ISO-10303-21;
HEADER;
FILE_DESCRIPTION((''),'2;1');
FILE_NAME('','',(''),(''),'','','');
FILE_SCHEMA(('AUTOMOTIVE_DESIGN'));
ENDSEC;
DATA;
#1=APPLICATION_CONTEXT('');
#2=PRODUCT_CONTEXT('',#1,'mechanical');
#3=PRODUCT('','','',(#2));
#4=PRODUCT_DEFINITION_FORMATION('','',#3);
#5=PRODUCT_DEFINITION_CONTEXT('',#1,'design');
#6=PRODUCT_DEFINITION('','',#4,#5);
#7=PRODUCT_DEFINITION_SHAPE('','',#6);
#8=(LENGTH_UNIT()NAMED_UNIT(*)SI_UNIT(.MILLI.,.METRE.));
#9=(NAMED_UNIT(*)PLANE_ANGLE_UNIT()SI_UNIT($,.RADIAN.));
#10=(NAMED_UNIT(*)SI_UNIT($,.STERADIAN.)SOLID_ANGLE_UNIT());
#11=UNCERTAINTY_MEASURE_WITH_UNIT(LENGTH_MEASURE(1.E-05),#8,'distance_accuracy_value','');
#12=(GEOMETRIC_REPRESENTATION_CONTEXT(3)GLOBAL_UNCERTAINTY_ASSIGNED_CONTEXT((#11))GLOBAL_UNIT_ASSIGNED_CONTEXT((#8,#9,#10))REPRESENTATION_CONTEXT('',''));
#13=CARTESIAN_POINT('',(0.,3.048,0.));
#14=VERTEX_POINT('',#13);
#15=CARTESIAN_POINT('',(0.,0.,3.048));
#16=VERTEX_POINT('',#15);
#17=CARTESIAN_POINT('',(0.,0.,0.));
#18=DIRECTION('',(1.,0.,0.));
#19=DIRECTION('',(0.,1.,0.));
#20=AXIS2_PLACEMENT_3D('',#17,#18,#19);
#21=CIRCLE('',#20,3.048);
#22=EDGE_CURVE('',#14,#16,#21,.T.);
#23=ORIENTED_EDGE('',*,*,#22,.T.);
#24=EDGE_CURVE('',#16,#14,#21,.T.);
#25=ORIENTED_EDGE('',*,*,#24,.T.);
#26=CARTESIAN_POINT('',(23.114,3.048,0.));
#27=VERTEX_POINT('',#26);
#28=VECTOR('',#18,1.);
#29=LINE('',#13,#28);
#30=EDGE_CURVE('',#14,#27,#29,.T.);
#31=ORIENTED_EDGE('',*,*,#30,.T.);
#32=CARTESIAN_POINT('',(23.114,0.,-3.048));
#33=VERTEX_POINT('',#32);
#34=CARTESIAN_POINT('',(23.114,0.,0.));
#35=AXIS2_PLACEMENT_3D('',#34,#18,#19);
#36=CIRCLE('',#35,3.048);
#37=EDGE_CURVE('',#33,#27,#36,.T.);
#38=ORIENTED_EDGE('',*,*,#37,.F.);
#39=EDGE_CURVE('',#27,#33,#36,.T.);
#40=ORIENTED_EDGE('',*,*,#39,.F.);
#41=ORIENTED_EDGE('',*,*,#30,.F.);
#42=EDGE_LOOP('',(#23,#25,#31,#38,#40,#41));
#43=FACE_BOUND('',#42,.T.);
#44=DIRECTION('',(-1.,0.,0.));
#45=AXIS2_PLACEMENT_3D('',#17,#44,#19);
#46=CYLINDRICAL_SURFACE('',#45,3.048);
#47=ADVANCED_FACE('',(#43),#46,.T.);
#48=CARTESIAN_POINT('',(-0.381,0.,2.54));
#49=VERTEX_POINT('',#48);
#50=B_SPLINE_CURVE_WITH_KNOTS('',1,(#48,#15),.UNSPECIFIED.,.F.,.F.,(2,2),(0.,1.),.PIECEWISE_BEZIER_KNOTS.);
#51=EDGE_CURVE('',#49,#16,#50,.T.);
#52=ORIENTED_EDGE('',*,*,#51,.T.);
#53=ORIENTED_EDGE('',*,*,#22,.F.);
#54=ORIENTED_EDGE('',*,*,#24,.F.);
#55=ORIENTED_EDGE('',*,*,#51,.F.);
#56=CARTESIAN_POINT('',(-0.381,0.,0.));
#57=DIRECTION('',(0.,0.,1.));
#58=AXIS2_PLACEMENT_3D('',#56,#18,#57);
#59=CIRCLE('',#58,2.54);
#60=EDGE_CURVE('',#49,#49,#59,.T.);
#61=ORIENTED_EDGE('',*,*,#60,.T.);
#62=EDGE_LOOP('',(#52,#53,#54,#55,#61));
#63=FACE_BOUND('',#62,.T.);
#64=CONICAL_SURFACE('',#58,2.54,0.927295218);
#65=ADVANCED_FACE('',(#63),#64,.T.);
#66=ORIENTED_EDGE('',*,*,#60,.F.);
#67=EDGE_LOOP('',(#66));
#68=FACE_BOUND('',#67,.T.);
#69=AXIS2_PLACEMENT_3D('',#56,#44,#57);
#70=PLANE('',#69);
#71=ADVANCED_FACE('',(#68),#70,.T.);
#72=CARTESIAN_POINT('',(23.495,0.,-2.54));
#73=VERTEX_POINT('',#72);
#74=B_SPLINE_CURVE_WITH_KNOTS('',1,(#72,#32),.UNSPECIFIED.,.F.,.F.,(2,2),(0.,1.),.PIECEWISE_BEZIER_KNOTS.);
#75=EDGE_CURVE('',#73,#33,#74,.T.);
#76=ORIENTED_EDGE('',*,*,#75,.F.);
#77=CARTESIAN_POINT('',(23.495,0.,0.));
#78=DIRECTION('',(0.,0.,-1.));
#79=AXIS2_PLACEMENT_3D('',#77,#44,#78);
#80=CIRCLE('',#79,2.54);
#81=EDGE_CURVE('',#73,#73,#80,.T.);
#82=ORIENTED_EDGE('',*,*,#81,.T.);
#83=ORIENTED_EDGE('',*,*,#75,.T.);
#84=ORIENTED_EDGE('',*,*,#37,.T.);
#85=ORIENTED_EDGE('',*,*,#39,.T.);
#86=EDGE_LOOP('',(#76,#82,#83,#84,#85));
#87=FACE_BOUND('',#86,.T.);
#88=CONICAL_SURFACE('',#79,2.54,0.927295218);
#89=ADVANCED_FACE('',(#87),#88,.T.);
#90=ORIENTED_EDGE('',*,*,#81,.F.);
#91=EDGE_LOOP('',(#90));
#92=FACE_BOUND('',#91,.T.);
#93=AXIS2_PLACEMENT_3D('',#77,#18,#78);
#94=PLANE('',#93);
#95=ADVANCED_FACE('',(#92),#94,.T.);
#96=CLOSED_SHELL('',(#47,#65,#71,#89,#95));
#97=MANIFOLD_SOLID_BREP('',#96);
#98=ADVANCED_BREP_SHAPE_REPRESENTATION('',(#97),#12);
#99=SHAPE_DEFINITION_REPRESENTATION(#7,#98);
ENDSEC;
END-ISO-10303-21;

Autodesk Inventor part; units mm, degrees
ref_plane "YZ Plane" through (0, 0, 0) normal (1, 0, 0) x (0, 1, 0)
sketch "Sketch1" plane through (0, 0, 0) normal (1, 0, 0) x (0, 1, 0)
  circle A0 centre (0, 0) radius 3.048
  dimension "d0" = 6.096
extrude "Extrusion1" add sketch "Sketch1" along normal blind 23.114
ref_plane "Work Plane1" through (23.495, 0, 0) normal (1, 0, 0) x (0, 0, -1)
sketch "Sketch2" plane through (23.495, 0, 0) normal (1, 0, 0) x (0, 0, -1)
  circle A0 centre (0, 0) radius 2.54
  dimension "d4" = 5.08
loft "Loft1" add profiles "Sketch2" section 2 edges at (23.114, -3.048, 0)
ref_plane "Work Plane2" through (-0.381, 0, 0) normal (-1, 0, 0) x (0, 0, 1)
sketch "Sketch3" plane through (-0.381, 0, 0) normal (-1, 0, 0) x (0, 0, 1)
  circle A0 centre (0, 0) radius 2.54
  dimension "d10" = 5.08
loft "Loft2" add profiles "Sketch3" section 2 edges at (0, -3.048, 0)
properties part number "shaft 6x24-1"
